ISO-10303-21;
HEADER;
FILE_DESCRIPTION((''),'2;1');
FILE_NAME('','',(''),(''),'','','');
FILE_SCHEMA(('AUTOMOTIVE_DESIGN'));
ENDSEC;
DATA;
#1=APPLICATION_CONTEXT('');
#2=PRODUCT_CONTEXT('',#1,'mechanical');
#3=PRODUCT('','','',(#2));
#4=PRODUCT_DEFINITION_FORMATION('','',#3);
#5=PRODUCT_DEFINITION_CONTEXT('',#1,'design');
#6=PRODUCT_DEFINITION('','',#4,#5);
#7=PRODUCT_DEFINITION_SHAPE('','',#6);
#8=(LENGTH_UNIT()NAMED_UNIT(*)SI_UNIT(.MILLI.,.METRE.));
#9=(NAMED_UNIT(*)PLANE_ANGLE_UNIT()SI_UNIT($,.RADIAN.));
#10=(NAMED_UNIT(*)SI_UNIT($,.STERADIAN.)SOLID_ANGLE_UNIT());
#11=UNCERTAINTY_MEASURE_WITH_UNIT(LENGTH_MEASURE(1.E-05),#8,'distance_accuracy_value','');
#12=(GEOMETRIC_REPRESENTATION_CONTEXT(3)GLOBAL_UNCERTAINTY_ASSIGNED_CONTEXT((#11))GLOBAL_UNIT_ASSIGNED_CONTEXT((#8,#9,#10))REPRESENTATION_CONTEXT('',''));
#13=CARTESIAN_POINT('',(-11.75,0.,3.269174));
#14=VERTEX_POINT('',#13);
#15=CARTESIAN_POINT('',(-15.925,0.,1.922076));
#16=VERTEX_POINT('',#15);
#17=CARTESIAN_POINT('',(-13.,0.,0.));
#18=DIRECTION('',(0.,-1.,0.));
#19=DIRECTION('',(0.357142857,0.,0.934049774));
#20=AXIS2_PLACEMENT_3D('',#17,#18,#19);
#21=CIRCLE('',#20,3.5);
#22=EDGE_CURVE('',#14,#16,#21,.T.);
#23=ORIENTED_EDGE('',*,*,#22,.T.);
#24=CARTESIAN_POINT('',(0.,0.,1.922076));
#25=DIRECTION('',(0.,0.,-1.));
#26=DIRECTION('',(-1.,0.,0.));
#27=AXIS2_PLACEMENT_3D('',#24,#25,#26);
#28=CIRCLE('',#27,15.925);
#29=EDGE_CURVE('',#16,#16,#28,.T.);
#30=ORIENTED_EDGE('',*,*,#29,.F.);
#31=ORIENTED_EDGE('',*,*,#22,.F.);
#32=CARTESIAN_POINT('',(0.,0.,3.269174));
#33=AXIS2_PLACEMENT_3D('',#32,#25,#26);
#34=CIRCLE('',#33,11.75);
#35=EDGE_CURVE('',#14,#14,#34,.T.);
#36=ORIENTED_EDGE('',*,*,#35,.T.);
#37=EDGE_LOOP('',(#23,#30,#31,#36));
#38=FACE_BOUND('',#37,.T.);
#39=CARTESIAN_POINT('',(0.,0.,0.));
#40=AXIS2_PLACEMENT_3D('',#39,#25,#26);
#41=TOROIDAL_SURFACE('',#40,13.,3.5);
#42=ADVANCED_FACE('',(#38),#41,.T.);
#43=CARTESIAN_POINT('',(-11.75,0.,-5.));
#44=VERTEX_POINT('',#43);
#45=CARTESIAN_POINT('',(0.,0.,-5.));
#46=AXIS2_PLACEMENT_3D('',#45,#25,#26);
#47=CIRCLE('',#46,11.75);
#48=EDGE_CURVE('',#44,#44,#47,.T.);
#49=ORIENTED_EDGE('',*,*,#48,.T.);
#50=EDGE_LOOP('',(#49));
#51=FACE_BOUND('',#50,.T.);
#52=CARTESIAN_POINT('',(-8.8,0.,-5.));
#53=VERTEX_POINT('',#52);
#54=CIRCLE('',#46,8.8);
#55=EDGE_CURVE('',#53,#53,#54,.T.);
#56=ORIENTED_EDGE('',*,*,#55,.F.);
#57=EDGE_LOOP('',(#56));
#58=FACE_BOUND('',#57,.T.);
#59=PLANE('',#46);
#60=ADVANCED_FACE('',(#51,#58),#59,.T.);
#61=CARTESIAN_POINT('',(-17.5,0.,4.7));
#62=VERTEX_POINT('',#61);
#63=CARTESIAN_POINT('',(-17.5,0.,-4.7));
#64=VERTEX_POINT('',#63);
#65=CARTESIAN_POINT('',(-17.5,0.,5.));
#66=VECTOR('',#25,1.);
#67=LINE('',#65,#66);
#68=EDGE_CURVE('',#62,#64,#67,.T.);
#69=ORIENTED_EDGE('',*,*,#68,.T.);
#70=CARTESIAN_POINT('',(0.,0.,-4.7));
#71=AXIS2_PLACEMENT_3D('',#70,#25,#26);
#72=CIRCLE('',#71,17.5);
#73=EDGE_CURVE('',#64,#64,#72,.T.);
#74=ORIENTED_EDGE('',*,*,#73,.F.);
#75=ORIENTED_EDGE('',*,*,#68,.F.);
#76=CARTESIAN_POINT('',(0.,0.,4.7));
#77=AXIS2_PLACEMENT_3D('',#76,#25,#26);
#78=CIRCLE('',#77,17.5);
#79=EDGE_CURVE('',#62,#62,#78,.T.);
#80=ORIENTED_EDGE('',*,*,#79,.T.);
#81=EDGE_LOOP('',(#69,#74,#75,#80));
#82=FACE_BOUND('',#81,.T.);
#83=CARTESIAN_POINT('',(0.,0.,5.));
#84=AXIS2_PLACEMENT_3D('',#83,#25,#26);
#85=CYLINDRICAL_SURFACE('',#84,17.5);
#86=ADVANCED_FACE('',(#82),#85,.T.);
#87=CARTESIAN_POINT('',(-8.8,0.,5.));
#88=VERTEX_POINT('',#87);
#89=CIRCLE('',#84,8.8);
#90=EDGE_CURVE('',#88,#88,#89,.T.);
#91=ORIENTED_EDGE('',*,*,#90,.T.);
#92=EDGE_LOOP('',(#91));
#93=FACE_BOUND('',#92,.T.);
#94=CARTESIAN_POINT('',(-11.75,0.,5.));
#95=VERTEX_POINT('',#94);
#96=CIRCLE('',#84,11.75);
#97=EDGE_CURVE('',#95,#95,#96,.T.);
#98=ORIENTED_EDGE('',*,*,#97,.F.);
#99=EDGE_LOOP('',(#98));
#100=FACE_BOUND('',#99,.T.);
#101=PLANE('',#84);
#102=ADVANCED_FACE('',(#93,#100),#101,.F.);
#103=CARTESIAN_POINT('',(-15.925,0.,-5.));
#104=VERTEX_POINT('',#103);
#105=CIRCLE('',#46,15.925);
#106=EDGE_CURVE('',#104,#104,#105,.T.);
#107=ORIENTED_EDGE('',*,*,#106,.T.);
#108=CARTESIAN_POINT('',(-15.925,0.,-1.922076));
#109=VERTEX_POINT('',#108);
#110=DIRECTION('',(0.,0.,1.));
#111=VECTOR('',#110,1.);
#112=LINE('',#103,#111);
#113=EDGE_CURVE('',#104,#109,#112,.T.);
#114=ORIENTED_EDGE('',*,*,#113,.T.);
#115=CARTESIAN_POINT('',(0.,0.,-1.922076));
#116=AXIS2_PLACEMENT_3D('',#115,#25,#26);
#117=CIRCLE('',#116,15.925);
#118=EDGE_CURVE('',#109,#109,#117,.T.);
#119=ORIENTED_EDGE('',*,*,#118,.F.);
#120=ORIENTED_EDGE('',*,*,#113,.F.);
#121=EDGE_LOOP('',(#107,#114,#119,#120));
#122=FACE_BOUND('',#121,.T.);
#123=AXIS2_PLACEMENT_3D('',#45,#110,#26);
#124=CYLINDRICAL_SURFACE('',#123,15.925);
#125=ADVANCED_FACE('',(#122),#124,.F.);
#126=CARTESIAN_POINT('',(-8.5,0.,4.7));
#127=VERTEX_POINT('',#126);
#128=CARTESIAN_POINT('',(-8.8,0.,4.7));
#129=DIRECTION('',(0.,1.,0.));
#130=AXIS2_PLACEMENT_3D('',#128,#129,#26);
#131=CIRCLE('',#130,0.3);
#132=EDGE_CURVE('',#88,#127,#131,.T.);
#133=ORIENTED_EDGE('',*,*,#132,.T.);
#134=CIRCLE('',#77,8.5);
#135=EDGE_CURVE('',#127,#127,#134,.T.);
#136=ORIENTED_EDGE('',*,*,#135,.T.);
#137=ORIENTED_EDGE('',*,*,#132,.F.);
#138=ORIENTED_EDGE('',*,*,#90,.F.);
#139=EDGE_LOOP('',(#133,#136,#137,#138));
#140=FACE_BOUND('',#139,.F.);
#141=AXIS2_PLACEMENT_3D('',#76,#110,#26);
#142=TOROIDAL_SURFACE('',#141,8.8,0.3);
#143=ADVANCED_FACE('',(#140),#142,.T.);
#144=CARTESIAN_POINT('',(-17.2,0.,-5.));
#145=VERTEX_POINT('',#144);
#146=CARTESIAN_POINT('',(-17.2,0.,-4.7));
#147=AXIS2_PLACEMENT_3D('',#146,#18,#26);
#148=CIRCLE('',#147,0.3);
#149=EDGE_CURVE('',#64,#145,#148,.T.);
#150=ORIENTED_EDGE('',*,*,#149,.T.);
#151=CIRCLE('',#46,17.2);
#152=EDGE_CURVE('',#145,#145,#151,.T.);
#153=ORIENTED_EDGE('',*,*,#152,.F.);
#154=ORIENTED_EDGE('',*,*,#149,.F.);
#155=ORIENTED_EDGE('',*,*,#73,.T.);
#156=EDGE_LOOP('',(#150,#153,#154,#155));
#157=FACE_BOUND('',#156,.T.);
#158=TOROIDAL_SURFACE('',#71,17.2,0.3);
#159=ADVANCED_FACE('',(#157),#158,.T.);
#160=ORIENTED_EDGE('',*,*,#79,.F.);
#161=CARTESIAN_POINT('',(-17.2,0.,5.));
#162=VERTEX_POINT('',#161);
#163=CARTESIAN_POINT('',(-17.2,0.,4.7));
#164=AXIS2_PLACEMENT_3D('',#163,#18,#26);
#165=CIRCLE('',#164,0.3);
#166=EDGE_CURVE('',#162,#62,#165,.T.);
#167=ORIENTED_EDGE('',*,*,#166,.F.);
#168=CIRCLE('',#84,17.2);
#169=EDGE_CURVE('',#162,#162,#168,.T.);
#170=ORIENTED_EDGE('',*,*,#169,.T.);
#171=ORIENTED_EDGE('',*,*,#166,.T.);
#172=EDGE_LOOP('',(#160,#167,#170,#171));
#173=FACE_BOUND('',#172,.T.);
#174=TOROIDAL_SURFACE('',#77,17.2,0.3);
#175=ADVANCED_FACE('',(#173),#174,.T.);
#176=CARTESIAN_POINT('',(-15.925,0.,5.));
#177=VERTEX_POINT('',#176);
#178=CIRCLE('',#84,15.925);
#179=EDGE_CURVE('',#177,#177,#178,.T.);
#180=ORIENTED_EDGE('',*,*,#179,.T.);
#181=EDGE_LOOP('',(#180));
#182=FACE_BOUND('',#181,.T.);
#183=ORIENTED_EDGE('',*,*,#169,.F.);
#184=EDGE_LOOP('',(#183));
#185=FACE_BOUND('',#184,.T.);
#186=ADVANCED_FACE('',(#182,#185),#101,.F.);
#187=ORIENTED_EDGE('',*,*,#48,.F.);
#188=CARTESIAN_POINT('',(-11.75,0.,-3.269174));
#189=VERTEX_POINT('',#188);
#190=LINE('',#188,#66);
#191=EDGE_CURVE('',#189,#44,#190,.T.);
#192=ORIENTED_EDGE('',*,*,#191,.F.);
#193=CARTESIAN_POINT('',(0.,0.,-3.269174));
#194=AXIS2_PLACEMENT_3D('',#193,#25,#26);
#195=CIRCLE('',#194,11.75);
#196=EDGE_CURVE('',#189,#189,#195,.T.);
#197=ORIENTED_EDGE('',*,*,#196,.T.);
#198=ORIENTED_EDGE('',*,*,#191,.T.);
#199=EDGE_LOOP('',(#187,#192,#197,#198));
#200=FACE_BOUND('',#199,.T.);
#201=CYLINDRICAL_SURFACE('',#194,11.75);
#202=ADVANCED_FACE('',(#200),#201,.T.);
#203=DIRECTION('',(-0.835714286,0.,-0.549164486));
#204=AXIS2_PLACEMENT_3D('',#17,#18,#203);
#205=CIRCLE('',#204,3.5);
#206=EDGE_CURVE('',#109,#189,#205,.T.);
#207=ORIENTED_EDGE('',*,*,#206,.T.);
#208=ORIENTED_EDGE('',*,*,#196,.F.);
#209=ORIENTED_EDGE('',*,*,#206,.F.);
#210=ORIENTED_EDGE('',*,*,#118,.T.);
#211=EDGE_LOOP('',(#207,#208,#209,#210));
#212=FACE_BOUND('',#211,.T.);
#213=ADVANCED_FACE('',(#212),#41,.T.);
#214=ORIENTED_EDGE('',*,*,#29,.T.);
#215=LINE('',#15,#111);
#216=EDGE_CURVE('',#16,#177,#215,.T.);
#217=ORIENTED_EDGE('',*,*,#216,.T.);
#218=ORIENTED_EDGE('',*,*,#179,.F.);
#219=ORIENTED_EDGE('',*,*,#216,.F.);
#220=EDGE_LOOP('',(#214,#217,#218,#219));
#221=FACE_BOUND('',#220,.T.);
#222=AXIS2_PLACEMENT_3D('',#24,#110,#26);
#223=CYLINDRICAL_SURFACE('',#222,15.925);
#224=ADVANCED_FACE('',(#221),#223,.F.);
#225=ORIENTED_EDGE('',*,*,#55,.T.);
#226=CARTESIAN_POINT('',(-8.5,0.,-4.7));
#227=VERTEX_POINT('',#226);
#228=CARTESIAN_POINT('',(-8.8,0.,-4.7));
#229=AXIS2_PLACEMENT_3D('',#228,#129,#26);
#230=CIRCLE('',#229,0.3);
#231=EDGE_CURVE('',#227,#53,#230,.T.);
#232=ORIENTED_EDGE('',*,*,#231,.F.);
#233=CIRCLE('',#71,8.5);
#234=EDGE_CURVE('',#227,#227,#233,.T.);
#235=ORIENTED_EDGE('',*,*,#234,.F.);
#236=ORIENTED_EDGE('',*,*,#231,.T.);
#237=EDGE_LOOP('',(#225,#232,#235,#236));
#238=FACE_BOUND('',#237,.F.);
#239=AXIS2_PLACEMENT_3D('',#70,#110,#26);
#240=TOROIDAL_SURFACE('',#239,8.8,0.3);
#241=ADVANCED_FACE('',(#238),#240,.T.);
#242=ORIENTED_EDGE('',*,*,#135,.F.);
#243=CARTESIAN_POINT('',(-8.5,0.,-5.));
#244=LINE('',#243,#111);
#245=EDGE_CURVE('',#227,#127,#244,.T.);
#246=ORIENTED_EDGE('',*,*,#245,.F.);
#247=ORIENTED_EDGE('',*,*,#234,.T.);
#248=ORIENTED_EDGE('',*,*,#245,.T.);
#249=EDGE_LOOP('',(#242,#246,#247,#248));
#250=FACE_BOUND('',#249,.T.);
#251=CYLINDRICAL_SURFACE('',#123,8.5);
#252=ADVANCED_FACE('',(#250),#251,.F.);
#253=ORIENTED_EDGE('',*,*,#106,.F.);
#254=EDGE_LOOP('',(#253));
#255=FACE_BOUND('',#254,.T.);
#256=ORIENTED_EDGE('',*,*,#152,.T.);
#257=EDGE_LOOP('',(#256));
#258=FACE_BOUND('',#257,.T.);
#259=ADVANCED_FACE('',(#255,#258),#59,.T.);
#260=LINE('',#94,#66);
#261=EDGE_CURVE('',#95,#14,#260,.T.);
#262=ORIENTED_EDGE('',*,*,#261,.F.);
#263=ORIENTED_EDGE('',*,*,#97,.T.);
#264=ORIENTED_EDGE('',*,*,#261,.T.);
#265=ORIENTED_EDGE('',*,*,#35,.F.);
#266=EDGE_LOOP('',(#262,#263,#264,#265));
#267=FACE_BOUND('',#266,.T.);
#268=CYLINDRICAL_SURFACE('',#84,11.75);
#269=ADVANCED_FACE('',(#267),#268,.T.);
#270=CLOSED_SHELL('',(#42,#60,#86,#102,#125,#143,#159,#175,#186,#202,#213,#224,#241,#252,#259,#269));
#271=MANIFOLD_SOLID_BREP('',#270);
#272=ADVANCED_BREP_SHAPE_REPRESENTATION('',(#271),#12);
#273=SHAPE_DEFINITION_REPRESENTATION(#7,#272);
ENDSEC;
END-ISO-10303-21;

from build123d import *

# Parameters (mm, degrees)
F4_R = 0.3
F5_R = 0.3


with BuildPart() as f3:
    # F2 (on Front) → F3 (revolve)
    with BuildSketch(Plane.XZ):
        with BuildLine():
            Line((-11.75, -5), (-8.5, -5))
            Line((-8.5, -5), (-8.5, 5))
            Line((-8.5, 5), (-11.75, 5))
            Line((-11.75, 5), (-11.75, 3.2691742077))
            ThreePointArc((-11.75, 3.2691742077), (-14.0747440843, 3.3309045548), (-15.925, 1.9220757009))
            Line((-15.925, 1.9220757009), (-15.925, 5))
            Line((-15.925, 5), (-17.5, 5))
            Line((-17.5, 5), (-17.5, -5))
            Line((-17.5, -5), (-15.925, -5))
            Line((-15.925, -5), (-15.925, -1.9220757009))
            ThreePointArc((-15.925, -1.9220757009), (-14.0747440843, -3.3309045548), (-11.75, -3.2691742077))
            Line((-11.75, -3.2691742077), (-11.75, -5))
        make_face()
    revolve(axis=Axis((0, 0, 0), (0, 0, -1)))

    # F4
    f4_edges = [f3.edges().sort_by_distance(p)[0] for p in [
        (17.5, 0, 5),
        (17.5, 0, -5),
    ]]
    fillet(f4_edges, radius=F4_R)

    # F5
    f5_edges = [f3.edges().sort_by_distance(p)[0] for p in [
        (8.5, 0, 5),
        (8.5, 0, -5),
    ]]
    fillet(f5_edges, radius=F5_R)


solid = f3.part
